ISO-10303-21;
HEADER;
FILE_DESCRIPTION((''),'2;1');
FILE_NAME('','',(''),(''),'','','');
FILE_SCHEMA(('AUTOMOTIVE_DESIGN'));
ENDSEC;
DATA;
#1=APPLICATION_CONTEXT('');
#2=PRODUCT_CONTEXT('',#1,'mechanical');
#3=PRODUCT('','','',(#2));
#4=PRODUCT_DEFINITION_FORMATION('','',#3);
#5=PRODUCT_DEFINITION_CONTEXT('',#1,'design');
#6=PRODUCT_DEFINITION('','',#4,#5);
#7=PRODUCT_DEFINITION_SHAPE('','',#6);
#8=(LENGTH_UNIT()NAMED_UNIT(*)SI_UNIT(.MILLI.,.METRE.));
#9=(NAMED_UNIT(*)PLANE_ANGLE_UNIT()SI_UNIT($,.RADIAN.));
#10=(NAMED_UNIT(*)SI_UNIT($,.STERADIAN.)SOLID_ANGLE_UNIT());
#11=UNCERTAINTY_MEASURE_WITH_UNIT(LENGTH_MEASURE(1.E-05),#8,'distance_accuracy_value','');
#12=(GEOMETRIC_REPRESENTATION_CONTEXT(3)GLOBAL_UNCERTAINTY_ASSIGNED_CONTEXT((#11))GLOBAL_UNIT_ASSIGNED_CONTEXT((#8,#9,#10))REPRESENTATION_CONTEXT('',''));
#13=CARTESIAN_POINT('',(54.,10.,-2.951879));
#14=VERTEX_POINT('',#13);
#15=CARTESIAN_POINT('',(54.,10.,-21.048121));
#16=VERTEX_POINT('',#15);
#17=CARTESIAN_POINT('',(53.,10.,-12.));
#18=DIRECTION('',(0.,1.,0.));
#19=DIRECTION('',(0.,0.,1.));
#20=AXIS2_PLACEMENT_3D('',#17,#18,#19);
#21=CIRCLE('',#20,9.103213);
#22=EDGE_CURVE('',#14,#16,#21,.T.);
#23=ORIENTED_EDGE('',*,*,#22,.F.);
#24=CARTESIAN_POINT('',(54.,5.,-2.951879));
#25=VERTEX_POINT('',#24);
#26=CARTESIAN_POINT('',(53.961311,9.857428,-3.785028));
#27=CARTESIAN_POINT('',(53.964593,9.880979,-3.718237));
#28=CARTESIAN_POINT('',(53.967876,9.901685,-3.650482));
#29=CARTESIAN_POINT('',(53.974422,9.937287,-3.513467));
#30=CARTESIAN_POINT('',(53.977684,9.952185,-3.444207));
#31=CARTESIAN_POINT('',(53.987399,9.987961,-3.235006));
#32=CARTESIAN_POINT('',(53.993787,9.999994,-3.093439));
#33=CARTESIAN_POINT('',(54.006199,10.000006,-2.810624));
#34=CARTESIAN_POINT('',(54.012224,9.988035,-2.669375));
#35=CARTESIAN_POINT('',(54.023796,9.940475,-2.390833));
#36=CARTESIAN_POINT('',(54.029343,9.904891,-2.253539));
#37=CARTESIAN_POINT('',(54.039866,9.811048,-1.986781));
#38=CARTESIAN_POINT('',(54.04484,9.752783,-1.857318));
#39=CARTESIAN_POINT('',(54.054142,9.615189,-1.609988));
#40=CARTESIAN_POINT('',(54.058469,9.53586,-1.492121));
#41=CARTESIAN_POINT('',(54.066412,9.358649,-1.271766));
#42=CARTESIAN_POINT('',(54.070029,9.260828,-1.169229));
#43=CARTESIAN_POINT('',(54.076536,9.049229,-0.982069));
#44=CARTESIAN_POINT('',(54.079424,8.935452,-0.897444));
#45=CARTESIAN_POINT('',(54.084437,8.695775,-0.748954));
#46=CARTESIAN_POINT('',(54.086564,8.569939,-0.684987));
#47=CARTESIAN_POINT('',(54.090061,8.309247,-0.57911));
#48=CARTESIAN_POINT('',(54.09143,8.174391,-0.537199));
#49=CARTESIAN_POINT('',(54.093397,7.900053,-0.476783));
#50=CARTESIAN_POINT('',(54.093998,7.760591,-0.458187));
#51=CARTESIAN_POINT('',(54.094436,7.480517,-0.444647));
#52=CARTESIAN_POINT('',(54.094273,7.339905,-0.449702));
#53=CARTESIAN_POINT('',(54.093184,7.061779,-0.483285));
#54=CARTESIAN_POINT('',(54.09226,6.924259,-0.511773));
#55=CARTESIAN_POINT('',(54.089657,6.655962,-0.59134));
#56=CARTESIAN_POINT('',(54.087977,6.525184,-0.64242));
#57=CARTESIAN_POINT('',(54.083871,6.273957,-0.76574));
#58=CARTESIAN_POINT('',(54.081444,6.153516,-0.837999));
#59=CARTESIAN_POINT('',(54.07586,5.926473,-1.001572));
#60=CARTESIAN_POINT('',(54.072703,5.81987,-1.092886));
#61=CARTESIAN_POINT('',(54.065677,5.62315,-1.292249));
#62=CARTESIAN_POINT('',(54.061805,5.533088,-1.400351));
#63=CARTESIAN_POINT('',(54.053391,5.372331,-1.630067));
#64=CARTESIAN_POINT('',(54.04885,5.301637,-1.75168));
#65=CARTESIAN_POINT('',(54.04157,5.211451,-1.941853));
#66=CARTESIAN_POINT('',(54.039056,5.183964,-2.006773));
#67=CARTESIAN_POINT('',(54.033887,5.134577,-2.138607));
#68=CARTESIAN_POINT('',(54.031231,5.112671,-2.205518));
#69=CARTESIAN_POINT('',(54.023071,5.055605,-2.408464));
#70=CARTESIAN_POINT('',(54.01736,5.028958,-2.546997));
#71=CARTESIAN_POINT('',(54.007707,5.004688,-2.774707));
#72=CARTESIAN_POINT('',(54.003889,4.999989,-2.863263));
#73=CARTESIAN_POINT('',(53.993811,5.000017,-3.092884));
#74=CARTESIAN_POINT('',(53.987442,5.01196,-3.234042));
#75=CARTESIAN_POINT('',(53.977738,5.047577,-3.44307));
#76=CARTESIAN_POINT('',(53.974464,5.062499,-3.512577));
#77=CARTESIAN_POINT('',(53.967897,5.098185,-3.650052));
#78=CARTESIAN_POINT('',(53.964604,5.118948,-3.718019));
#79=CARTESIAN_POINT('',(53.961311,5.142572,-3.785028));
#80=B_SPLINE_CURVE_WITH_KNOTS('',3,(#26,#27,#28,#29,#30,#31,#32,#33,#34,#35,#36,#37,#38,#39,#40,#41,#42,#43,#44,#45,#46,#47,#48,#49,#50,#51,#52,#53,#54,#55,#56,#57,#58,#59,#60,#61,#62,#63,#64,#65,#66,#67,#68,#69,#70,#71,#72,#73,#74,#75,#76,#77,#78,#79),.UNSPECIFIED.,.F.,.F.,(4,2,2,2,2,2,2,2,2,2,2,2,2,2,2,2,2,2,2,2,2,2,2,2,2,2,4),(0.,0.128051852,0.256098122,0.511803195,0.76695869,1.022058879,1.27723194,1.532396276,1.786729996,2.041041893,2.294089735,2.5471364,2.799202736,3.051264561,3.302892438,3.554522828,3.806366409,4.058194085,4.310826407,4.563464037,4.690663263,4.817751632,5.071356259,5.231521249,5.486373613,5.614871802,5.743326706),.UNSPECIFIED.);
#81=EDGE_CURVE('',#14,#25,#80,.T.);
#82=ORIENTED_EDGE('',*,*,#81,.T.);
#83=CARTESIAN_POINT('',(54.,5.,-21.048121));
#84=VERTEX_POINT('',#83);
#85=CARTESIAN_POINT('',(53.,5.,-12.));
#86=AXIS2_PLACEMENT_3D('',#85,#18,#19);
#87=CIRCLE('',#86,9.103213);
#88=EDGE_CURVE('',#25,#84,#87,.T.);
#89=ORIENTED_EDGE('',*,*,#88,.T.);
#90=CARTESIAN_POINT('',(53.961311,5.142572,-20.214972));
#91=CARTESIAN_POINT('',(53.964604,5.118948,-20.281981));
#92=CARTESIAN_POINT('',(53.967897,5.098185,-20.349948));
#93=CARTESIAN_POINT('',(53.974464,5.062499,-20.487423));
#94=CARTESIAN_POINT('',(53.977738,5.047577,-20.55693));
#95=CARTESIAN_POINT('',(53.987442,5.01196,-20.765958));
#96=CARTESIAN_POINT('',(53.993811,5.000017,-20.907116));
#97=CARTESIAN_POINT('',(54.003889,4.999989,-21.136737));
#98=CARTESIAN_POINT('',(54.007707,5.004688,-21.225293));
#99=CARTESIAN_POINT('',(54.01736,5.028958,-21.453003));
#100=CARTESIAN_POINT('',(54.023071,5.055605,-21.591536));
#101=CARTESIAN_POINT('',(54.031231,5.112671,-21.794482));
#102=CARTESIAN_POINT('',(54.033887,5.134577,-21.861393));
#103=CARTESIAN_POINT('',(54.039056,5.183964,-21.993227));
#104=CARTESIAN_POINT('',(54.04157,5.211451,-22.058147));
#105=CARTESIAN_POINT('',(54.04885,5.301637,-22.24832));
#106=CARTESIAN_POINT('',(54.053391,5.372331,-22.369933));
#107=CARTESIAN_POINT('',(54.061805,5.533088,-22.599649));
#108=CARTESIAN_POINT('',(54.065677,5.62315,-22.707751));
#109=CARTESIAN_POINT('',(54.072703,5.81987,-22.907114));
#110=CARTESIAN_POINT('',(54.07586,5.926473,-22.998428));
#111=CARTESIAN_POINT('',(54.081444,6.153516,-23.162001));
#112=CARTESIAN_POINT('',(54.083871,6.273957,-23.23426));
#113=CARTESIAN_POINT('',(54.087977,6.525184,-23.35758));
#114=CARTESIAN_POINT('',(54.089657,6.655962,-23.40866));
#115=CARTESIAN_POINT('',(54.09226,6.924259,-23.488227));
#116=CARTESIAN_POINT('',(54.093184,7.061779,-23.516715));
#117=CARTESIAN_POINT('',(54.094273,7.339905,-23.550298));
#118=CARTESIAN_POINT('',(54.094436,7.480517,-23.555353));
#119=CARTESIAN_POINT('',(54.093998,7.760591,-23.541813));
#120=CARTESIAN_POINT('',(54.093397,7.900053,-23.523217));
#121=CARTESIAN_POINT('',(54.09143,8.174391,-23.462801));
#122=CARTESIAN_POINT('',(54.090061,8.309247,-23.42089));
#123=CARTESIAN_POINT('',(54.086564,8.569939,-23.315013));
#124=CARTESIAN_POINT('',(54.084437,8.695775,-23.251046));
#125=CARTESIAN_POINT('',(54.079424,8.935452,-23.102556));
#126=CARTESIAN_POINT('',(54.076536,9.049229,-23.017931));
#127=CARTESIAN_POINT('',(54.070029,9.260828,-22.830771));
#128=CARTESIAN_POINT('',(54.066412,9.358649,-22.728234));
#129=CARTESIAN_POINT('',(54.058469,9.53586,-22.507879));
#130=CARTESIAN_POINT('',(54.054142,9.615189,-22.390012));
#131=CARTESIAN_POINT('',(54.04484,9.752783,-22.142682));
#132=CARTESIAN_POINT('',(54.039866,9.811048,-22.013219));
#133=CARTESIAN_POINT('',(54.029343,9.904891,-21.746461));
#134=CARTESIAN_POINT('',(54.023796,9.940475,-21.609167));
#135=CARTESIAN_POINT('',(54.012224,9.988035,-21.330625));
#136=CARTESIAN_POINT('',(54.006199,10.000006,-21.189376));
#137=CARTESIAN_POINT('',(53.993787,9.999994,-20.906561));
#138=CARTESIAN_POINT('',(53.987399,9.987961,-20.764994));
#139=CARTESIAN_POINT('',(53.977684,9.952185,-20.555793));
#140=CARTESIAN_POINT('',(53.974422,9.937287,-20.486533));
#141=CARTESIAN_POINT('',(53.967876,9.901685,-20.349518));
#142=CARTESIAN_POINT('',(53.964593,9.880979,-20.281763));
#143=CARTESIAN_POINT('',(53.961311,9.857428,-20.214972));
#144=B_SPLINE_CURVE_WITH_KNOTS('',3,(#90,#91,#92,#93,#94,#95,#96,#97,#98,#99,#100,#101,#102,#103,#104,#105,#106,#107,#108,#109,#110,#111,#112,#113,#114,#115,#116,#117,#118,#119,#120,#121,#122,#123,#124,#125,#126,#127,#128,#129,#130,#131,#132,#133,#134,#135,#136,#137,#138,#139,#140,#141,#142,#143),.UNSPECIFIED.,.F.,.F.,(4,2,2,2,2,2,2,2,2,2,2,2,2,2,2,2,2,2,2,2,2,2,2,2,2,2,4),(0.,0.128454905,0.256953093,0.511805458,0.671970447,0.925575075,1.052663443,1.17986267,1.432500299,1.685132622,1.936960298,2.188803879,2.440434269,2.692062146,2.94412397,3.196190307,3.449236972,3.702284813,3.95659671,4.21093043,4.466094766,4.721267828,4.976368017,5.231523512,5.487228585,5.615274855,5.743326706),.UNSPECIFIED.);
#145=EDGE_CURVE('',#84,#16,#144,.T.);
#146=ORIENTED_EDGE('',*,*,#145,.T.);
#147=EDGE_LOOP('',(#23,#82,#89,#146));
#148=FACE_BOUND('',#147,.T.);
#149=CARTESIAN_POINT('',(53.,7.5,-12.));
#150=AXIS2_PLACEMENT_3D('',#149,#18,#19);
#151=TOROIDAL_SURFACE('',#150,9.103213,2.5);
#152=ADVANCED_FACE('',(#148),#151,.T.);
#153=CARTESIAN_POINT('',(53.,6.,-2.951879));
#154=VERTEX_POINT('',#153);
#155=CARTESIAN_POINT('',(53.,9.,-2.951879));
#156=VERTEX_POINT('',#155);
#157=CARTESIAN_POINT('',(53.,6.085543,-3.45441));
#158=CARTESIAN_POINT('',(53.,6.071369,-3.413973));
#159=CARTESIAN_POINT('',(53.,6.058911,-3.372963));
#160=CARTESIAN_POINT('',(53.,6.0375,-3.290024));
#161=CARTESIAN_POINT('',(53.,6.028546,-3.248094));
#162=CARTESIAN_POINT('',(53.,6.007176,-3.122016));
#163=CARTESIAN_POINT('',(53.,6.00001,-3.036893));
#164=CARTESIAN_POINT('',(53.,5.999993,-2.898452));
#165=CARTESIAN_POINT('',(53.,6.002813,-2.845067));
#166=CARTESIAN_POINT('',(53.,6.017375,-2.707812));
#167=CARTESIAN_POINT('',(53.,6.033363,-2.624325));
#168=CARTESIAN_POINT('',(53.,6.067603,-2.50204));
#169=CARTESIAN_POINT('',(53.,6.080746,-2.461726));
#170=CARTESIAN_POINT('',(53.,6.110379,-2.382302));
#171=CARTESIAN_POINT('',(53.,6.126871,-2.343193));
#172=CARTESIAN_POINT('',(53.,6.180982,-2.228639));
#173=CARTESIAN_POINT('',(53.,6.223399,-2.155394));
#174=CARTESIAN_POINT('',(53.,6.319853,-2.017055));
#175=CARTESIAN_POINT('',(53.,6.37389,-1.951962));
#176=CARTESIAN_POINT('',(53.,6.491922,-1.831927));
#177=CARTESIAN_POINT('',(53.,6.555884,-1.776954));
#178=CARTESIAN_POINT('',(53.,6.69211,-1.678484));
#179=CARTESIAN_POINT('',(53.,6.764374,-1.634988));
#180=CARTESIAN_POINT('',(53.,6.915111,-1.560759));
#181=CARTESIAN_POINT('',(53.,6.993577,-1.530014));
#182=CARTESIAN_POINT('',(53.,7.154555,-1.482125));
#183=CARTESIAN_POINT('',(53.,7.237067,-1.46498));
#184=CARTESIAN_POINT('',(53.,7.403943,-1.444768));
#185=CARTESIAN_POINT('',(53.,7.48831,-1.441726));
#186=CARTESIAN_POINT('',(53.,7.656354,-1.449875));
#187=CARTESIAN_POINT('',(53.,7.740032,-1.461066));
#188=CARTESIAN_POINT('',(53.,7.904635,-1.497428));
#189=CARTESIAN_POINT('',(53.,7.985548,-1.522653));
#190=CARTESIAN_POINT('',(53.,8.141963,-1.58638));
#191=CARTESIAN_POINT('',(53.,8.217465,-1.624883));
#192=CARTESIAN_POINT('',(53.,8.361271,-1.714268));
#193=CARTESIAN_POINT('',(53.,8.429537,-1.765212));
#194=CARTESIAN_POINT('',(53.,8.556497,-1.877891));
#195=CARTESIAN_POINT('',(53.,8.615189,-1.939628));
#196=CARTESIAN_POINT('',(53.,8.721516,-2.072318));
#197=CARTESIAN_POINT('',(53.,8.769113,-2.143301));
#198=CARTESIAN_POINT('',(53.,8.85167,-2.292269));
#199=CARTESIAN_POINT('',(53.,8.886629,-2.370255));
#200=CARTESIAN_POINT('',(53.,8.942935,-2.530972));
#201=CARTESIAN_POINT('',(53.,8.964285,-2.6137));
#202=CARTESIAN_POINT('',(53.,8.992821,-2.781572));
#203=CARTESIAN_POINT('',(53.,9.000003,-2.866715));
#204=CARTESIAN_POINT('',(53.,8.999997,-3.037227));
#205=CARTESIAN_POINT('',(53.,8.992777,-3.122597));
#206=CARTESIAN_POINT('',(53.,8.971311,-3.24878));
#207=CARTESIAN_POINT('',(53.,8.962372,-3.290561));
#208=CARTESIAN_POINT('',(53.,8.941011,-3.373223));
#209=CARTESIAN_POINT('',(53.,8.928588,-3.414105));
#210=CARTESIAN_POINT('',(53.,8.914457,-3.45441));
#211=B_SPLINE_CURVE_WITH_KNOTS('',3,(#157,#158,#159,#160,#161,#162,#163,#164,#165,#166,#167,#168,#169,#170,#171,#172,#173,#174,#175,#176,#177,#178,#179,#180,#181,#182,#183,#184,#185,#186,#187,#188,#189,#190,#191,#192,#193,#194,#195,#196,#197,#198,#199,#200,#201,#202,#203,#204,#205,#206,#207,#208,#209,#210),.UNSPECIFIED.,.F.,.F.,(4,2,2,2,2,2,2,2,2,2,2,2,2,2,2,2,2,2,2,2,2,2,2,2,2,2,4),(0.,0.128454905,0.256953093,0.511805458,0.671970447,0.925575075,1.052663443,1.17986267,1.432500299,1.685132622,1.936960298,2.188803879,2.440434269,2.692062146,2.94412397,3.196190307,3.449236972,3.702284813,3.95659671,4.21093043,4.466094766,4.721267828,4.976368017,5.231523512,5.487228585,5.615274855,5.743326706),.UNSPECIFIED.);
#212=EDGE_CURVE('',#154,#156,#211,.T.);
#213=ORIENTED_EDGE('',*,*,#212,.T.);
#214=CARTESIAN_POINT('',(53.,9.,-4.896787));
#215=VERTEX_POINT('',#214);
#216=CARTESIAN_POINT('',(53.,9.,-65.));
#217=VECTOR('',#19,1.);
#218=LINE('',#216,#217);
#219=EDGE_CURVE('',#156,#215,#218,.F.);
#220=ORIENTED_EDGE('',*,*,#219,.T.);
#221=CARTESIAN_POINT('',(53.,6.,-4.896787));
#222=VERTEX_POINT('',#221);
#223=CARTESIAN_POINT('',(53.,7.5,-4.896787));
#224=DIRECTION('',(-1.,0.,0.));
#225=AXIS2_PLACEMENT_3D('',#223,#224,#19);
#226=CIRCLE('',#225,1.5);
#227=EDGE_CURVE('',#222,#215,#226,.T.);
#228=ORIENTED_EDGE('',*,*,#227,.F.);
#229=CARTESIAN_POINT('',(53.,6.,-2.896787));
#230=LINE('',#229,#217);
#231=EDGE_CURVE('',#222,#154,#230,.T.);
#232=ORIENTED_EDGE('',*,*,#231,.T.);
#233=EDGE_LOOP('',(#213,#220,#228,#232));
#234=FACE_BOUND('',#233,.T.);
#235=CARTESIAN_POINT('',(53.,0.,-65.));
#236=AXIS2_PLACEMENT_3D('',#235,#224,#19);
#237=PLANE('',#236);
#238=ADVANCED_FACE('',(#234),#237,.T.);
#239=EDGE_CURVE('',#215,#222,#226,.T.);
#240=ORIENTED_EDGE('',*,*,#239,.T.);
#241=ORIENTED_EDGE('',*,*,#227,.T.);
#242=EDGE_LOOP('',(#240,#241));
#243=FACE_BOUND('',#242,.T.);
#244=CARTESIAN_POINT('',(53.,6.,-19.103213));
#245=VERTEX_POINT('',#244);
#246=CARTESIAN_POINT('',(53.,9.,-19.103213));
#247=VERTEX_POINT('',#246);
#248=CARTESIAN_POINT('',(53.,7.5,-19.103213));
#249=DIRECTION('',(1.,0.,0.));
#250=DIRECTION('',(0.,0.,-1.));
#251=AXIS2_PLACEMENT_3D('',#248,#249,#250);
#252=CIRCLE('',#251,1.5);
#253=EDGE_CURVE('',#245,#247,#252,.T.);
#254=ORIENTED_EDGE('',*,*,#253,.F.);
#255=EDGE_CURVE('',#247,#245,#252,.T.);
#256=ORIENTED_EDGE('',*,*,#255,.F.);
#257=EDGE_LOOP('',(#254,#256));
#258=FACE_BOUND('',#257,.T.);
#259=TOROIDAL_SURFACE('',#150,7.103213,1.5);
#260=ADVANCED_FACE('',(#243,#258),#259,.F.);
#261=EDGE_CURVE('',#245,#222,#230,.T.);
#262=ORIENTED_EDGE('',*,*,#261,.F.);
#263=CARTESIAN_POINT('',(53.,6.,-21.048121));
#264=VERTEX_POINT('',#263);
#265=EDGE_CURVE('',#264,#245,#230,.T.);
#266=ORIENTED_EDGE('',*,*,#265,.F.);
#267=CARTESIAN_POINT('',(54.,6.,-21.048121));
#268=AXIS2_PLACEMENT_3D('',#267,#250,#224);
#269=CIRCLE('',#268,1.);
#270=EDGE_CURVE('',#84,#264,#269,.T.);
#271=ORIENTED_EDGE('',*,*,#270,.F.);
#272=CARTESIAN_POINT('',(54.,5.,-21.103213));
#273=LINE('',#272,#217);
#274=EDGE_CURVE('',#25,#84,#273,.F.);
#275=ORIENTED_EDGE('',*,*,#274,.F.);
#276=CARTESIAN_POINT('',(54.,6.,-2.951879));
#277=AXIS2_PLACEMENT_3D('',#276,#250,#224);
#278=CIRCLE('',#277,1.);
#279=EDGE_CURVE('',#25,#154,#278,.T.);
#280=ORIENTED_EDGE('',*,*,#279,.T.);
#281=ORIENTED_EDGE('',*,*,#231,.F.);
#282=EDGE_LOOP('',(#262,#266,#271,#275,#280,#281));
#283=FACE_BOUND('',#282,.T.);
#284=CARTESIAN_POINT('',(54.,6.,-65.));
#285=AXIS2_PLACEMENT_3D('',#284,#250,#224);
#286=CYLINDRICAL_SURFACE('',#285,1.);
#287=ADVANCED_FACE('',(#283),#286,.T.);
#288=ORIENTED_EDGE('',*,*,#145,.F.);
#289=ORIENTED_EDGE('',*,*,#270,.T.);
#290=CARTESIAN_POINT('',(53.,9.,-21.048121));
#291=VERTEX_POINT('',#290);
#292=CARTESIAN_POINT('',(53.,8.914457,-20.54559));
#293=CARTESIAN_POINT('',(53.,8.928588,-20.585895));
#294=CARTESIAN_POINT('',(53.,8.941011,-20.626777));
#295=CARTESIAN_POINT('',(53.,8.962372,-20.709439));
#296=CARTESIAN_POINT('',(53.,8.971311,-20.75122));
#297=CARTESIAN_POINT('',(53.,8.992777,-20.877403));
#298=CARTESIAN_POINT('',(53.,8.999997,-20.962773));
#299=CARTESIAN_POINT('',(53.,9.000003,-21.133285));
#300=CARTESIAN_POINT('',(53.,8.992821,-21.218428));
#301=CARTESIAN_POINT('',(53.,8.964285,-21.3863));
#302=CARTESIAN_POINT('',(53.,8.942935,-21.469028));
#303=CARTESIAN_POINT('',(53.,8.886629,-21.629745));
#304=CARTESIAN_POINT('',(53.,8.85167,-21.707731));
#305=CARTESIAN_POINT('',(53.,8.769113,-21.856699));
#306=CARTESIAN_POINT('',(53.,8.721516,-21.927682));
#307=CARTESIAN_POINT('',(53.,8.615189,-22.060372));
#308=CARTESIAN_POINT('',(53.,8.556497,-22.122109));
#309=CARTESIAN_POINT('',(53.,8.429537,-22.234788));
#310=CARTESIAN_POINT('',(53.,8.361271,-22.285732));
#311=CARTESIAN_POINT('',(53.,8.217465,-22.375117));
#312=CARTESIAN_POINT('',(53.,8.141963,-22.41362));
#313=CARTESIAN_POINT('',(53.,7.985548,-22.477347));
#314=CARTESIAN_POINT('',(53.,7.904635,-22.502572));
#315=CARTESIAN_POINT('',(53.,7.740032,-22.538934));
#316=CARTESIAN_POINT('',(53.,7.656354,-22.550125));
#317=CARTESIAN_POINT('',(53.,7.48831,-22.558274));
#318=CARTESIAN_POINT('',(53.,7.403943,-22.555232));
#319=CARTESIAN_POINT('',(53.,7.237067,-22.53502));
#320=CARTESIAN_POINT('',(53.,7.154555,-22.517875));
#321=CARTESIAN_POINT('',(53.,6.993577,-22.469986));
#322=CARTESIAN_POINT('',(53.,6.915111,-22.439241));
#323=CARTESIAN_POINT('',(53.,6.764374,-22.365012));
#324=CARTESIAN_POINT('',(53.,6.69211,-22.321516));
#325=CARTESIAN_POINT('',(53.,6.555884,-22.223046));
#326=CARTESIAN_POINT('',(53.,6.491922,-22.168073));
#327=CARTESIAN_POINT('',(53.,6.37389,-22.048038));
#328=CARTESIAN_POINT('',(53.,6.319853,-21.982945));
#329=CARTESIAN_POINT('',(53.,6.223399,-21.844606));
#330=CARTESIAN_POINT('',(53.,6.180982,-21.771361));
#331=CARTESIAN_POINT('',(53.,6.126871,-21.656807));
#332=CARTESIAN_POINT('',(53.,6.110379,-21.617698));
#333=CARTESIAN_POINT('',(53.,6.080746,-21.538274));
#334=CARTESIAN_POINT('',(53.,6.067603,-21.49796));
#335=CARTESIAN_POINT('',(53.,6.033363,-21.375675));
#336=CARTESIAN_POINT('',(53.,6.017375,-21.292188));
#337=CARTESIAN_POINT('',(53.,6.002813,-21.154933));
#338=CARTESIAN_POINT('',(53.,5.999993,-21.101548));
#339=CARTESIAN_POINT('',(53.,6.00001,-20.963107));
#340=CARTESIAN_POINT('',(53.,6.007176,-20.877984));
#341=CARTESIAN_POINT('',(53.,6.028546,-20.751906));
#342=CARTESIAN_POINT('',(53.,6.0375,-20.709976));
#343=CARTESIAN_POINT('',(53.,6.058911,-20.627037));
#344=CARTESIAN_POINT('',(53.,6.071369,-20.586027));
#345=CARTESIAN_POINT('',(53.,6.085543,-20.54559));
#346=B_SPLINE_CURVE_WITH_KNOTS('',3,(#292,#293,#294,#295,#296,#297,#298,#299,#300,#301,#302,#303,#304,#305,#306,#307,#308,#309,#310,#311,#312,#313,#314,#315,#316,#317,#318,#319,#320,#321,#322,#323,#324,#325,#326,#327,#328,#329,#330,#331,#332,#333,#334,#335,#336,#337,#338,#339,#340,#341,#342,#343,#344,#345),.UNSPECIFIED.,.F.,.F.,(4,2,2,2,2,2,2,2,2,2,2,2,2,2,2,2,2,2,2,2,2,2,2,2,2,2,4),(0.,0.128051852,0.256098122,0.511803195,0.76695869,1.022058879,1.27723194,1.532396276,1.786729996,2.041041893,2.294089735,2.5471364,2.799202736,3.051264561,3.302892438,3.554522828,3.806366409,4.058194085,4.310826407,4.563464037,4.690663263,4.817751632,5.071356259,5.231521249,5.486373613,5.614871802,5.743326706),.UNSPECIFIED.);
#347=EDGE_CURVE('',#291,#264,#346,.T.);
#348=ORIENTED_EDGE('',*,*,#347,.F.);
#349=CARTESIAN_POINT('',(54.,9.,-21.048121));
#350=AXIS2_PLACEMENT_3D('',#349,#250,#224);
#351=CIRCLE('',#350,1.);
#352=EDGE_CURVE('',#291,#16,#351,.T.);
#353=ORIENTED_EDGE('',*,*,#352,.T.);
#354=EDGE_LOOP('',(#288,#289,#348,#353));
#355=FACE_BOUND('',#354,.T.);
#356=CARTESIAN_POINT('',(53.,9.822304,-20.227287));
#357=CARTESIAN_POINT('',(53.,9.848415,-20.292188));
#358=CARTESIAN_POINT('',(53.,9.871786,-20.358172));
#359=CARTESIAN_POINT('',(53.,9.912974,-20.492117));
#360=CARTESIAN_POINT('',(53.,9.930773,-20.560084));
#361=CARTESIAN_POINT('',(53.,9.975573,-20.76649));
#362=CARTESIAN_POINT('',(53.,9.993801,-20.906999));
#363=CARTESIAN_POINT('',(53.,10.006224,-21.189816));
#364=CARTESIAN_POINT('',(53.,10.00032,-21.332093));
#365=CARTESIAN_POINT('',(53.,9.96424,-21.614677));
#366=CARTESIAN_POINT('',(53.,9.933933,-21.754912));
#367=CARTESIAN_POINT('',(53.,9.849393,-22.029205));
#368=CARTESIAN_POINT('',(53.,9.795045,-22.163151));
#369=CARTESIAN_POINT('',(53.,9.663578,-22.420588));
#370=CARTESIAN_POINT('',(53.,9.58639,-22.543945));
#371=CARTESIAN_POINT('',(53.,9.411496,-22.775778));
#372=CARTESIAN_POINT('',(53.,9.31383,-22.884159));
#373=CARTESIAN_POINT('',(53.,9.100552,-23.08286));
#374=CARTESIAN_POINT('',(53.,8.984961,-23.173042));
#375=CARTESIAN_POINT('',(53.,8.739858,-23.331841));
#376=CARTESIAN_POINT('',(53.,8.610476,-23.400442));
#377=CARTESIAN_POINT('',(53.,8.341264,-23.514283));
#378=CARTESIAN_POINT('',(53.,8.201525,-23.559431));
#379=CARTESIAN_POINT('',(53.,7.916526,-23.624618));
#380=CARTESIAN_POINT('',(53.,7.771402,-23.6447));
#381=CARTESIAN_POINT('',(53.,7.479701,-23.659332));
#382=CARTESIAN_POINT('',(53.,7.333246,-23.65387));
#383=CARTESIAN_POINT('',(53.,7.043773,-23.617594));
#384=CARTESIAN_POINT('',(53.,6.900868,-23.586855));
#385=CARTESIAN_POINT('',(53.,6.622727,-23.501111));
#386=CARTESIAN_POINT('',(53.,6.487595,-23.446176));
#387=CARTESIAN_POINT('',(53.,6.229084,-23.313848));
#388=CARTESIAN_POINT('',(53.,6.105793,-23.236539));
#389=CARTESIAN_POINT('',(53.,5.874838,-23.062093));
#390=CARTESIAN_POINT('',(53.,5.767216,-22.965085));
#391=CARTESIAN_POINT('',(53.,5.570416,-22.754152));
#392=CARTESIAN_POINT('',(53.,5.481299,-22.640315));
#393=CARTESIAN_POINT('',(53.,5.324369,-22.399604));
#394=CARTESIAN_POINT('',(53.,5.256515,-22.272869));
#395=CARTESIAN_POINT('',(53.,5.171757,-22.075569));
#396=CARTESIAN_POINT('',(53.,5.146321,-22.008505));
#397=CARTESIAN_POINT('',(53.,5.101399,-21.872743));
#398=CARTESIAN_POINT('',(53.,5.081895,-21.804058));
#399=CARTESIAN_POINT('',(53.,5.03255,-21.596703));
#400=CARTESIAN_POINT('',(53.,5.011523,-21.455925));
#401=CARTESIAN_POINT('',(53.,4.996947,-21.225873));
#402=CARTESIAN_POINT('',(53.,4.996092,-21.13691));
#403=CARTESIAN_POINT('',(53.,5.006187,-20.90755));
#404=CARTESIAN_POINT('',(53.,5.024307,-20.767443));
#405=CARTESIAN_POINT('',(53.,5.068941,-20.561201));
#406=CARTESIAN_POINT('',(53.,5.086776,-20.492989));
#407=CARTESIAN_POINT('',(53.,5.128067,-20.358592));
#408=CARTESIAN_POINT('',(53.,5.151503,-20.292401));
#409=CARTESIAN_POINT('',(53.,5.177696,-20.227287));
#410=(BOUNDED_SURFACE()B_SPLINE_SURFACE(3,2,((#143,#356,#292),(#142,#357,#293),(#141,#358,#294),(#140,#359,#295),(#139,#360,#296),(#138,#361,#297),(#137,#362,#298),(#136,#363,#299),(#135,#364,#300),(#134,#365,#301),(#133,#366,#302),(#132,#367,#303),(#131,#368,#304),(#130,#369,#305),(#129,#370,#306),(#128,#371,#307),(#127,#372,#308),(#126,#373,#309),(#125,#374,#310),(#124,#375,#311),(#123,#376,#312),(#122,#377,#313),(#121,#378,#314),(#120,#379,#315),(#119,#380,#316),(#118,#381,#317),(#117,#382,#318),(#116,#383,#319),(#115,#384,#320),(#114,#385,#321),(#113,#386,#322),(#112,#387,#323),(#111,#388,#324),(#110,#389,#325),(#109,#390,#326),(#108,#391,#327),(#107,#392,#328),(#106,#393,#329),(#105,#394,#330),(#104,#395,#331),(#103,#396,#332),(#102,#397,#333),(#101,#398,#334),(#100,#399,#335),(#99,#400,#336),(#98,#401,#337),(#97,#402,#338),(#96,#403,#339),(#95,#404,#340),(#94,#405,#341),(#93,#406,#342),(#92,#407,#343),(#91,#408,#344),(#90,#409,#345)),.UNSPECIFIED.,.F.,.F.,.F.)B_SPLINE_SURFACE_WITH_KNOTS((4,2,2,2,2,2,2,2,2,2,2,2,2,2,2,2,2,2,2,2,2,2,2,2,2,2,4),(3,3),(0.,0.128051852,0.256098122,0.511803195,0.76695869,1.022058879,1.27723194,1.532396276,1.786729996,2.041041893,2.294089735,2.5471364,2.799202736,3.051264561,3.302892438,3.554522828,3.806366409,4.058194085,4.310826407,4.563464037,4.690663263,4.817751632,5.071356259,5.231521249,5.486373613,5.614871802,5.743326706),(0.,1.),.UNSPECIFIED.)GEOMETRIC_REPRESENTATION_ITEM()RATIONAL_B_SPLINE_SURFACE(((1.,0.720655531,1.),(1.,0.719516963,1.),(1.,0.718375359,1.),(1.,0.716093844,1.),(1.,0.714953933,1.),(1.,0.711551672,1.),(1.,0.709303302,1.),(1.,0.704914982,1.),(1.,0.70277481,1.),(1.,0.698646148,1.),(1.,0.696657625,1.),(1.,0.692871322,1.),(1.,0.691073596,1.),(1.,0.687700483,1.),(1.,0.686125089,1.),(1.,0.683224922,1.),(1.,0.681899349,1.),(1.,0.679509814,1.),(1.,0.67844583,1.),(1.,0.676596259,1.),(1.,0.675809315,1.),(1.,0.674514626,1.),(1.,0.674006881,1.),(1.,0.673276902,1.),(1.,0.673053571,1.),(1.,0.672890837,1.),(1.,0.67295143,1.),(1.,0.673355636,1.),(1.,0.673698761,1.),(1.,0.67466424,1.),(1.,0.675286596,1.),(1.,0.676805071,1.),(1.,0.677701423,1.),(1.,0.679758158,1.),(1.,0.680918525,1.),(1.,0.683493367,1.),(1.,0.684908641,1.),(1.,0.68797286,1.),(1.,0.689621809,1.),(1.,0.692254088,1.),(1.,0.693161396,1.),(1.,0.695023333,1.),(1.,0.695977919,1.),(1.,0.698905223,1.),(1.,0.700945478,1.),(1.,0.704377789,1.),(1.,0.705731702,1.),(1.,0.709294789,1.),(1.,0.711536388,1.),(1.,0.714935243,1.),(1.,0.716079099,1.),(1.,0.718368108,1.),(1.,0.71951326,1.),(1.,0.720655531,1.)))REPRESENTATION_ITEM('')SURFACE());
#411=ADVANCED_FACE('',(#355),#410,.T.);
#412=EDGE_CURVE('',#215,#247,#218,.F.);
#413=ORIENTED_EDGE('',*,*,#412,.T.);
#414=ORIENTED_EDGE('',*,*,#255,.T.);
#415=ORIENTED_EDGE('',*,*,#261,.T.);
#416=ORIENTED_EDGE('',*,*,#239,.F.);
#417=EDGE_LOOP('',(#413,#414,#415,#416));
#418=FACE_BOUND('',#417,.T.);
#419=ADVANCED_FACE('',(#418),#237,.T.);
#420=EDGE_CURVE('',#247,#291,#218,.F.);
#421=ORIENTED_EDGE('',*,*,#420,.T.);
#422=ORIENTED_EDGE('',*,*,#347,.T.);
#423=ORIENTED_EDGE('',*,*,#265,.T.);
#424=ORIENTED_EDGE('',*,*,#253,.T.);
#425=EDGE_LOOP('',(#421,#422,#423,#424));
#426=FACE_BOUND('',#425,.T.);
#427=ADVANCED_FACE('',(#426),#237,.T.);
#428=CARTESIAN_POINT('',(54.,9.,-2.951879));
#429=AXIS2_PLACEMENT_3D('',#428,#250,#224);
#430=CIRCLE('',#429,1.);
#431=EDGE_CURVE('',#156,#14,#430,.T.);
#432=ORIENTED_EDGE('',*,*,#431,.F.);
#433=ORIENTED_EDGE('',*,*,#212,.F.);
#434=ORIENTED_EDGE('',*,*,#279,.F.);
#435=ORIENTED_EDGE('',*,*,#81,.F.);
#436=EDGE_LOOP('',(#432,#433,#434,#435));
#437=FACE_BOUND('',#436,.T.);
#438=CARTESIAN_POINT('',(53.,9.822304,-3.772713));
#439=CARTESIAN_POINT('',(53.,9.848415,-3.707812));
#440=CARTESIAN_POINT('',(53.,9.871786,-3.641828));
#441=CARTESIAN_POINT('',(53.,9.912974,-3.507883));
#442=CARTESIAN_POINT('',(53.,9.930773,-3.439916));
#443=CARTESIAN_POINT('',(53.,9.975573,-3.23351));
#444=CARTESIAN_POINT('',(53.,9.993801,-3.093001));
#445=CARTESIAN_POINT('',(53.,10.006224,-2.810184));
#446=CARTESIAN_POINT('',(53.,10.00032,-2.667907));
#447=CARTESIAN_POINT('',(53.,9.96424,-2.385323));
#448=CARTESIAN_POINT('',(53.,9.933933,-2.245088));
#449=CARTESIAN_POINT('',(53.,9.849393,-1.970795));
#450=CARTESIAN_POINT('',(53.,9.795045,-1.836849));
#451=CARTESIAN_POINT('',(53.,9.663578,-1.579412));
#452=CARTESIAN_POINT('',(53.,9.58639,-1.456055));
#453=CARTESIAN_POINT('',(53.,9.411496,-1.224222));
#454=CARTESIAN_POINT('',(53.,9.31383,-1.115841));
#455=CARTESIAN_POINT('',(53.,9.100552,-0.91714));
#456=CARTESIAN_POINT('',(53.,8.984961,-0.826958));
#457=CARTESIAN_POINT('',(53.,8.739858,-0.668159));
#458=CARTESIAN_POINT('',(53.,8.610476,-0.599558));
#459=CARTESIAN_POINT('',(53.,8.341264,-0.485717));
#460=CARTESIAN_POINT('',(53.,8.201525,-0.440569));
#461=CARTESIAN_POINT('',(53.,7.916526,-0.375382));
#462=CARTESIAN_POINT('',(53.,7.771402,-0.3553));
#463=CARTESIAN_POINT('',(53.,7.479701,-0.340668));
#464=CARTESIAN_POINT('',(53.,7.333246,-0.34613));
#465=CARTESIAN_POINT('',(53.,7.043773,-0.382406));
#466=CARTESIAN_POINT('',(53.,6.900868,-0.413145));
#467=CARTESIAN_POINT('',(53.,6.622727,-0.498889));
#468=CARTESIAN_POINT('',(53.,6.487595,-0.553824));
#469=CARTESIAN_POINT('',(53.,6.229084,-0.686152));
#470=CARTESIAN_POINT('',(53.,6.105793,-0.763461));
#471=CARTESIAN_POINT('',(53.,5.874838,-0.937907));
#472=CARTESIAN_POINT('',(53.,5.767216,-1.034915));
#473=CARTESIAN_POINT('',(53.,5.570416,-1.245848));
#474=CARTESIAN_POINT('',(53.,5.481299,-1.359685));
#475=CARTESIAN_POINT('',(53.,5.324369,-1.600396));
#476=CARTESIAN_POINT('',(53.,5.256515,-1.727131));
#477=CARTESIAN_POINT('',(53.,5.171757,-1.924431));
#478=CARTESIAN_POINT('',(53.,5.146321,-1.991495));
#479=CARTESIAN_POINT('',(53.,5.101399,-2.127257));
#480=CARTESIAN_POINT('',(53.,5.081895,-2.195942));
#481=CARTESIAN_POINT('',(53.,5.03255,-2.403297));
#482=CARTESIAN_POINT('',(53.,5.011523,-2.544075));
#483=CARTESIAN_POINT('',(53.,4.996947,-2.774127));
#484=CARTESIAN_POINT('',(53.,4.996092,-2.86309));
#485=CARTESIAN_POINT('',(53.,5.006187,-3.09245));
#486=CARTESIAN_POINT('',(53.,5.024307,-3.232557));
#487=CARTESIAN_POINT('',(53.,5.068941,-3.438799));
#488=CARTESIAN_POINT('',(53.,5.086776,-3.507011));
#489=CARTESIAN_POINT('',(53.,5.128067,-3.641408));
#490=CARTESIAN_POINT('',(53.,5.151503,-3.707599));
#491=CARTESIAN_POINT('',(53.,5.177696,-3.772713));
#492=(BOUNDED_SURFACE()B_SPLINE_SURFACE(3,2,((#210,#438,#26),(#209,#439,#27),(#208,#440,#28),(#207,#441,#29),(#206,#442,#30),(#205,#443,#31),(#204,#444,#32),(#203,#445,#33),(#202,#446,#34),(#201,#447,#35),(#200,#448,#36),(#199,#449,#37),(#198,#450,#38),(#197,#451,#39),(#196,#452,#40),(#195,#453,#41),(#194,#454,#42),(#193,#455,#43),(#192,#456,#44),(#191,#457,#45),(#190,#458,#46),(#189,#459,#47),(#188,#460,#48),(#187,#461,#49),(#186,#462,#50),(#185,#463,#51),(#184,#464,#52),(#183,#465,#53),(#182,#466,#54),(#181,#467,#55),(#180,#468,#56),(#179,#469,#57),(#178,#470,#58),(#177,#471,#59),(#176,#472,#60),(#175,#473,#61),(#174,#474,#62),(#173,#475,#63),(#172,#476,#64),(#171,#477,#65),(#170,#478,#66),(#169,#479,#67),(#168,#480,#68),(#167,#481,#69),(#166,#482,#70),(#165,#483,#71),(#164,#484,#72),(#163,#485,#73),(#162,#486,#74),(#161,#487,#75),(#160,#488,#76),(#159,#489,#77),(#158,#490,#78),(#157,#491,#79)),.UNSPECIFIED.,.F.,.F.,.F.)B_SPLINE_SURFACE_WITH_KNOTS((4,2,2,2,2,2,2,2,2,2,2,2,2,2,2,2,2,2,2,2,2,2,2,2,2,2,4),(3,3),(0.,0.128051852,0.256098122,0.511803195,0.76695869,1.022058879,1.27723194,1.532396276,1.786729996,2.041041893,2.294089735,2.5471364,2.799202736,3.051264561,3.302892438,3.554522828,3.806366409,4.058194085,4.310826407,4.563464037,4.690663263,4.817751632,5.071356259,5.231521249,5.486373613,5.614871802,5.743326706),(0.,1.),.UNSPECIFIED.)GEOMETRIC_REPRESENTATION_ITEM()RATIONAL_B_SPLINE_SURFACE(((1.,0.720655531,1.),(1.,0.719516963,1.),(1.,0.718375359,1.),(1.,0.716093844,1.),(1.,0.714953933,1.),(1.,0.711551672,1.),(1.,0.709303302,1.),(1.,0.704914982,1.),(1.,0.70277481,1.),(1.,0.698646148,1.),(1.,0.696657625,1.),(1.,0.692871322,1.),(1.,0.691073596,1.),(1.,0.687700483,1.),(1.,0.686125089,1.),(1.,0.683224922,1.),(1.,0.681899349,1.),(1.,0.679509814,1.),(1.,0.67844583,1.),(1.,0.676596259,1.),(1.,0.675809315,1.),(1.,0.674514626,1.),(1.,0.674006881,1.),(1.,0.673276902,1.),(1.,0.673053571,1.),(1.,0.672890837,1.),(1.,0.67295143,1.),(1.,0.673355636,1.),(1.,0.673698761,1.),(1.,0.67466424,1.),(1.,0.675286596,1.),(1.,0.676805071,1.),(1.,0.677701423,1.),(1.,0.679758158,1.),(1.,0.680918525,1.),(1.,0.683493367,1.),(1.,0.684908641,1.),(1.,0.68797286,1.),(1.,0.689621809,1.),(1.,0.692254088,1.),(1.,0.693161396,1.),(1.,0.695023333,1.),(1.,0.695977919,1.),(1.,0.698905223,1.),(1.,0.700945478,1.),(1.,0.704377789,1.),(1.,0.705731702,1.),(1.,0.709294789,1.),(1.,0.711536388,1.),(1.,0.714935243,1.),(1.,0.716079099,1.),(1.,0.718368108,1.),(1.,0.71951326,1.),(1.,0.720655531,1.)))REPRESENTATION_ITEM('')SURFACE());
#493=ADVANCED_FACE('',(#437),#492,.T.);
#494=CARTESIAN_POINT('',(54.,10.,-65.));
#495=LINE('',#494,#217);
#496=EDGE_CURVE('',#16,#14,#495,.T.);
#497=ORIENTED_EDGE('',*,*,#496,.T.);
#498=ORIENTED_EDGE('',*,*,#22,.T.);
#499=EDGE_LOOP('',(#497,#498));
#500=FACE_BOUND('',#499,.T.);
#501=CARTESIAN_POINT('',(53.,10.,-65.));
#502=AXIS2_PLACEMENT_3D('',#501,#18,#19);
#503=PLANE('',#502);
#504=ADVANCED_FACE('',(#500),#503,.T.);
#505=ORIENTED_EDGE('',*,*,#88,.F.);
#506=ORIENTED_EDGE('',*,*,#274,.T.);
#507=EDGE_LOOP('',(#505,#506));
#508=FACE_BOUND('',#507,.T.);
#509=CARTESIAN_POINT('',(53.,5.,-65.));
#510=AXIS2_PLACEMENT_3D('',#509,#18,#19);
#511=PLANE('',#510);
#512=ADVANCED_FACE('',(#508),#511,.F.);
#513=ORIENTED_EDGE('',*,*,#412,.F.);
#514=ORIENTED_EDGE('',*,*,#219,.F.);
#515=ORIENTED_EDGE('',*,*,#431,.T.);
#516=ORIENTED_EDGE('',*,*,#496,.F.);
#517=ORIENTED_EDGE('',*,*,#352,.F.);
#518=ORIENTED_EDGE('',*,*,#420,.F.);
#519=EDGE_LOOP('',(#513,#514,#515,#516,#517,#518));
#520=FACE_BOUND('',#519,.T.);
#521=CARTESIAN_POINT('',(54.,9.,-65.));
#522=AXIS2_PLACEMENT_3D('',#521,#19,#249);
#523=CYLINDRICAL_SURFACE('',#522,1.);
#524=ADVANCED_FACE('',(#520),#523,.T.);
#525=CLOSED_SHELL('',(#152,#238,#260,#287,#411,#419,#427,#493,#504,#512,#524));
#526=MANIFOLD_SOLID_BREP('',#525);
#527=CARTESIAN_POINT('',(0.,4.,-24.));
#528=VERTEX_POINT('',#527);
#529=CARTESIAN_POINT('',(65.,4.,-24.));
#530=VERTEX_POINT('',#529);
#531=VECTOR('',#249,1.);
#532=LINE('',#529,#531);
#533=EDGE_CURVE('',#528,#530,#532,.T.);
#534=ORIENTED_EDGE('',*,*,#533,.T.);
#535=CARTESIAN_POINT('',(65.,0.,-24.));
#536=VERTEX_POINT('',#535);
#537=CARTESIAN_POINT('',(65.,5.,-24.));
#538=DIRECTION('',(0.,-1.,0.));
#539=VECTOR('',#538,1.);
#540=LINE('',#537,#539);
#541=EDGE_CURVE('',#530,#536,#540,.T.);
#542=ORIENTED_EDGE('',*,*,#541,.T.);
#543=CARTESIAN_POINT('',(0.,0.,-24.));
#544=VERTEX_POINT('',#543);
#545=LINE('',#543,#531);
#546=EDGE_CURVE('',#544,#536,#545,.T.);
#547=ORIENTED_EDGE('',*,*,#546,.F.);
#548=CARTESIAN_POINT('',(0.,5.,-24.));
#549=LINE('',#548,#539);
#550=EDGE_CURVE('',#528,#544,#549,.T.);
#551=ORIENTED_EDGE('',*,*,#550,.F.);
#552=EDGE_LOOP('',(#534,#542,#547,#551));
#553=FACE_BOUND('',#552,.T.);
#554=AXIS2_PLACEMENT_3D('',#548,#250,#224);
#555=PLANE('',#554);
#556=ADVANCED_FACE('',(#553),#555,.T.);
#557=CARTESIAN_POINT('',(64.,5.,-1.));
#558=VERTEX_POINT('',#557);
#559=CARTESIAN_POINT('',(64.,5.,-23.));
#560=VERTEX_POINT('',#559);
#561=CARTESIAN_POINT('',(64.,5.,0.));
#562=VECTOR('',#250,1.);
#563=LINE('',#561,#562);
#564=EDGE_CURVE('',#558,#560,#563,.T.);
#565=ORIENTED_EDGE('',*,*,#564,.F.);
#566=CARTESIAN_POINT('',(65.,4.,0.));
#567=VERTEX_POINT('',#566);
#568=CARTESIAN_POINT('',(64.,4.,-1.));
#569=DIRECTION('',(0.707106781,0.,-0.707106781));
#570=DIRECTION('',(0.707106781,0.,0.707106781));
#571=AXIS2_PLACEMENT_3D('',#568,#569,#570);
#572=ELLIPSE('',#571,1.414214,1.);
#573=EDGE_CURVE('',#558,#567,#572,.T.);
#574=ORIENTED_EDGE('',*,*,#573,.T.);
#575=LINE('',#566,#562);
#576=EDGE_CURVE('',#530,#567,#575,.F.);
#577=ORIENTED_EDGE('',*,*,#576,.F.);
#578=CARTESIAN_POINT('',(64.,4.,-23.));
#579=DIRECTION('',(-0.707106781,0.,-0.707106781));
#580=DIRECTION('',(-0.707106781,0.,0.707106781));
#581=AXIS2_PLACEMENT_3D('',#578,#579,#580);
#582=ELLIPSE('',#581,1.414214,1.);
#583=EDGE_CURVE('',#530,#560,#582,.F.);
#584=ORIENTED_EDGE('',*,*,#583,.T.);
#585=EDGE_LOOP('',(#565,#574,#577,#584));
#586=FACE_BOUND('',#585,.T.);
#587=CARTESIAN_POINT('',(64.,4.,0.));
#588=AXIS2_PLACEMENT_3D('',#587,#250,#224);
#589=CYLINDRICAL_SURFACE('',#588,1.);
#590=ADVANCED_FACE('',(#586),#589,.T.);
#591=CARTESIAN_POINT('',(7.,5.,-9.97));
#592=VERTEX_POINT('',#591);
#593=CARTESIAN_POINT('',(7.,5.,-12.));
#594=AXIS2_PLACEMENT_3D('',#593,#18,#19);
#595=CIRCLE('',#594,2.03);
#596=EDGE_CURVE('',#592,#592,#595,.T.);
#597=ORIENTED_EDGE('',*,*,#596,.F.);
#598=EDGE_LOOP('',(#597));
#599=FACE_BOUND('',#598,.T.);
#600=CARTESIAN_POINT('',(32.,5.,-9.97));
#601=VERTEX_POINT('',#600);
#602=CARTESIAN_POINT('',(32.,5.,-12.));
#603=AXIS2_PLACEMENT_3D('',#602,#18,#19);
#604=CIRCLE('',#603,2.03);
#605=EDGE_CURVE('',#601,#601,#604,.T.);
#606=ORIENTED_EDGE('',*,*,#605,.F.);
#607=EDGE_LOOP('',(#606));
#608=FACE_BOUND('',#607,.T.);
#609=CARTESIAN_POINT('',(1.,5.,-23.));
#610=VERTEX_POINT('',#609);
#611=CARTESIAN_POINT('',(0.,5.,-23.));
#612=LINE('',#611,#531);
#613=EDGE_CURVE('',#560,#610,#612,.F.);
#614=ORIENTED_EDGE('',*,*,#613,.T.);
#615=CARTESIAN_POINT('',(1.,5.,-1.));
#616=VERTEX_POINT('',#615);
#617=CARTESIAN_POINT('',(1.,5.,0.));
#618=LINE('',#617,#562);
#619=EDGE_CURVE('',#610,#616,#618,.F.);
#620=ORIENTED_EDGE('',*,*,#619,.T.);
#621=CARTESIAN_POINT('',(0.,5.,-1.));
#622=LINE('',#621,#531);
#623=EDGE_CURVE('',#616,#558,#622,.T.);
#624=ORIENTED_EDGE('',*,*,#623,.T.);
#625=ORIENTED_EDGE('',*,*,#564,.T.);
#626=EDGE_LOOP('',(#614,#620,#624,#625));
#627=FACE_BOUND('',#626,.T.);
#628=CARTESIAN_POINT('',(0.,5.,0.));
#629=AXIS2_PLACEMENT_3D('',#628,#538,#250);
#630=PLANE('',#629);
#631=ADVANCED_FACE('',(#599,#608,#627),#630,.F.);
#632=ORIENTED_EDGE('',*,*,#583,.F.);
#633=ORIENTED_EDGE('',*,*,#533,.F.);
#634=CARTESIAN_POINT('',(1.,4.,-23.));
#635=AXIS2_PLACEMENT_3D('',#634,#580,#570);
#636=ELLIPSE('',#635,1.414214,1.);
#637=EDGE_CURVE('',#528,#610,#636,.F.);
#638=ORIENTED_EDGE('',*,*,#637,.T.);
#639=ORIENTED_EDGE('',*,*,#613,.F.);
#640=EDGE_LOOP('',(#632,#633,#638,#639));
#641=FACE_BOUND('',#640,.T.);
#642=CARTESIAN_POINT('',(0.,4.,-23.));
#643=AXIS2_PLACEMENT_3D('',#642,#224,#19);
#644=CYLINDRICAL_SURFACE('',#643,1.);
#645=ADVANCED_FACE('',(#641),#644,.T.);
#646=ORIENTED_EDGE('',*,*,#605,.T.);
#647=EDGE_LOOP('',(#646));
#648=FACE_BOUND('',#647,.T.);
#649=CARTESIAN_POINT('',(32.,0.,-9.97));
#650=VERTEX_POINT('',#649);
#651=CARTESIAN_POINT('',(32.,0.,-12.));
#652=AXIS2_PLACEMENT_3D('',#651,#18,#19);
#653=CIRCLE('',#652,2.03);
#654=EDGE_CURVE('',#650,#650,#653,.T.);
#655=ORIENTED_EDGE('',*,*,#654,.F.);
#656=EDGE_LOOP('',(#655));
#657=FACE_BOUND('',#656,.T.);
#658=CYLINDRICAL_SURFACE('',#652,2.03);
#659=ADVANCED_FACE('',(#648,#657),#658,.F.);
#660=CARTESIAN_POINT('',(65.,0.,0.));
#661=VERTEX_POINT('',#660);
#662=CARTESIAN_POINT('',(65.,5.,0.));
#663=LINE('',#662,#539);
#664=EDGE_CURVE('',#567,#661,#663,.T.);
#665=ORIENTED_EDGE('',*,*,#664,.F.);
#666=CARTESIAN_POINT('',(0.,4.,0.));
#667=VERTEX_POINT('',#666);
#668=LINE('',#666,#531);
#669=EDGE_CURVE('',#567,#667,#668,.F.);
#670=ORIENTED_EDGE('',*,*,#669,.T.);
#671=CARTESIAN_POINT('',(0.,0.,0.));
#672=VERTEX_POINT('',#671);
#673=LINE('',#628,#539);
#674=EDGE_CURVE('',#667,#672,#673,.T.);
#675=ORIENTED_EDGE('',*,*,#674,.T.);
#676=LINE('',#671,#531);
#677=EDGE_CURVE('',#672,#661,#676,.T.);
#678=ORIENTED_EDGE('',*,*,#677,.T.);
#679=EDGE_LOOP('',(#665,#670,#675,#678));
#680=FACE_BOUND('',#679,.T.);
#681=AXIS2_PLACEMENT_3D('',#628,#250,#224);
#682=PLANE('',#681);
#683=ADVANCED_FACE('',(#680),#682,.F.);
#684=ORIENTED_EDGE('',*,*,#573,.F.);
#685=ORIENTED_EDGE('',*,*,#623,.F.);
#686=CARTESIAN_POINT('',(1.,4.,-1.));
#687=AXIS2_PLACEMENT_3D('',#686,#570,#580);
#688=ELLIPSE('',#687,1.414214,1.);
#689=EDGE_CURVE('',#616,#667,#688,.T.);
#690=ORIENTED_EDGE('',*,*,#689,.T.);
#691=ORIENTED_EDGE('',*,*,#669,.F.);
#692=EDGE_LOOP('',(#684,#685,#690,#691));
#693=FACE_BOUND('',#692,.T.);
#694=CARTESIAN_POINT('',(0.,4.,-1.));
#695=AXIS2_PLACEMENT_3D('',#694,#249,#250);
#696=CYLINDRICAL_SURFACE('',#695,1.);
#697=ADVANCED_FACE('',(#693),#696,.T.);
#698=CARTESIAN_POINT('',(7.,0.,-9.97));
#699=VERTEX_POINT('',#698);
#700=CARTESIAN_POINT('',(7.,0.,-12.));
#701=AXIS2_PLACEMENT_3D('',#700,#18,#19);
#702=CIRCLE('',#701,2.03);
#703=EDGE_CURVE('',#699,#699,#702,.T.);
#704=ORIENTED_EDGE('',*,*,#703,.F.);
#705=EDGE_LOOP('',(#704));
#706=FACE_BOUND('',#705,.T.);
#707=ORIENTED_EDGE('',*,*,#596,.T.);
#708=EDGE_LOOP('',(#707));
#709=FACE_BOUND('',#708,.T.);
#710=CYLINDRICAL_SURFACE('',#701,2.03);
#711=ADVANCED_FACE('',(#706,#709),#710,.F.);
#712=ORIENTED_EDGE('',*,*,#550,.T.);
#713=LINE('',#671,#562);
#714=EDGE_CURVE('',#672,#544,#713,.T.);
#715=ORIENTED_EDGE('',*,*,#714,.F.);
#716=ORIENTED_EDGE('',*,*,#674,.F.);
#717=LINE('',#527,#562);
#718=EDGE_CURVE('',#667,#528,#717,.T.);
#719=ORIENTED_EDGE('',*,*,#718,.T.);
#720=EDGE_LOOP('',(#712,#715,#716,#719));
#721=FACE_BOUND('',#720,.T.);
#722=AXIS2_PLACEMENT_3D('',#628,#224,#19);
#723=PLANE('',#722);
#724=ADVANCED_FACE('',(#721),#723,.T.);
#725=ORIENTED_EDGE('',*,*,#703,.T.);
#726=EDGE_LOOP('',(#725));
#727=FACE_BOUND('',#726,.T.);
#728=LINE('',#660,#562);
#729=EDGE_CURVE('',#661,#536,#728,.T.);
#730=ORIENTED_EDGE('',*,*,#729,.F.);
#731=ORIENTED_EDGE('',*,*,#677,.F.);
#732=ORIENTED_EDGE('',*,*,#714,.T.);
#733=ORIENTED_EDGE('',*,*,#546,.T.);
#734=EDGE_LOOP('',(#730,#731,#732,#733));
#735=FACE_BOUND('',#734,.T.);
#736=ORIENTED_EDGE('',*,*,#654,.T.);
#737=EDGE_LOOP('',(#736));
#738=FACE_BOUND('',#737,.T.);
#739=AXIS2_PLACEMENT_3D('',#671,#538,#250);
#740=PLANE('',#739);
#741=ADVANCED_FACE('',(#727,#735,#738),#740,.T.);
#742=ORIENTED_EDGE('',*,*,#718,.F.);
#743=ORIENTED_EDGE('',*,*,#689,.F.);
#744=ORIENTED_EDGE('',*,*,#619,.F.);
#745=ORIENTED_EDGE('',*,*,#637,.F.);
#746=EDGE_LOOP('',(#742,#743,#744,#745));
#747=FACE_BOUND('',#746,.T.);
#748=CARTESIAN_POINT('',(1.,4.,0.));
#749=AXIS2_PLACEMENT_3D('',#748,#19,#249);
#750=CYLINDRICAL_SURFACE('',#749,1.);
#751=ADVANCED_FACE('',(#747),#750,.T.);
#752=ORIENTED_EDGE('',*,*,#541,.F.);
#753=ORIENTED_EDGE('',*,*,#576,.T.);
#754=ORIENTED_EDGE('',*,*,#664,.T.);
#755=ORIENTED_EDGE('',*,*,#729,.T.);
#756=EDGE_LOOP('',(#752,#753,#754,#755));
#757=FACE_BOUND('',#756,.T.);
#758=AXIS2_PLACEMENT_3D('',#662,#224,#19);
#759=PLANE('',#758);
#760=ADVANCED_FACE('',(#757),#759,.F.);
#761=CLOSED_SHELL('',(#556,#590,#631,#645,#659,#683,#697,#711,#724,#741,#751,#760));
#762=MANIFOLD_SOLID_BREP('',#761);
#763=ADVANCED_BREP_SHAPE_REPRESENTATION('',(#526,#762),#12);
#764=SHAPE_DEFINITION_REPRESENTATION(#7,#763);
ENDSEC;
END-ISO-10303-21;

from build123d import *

# Parameters (mm, degrees)
SKETCH1_W           = 65
SKETCH1_H           = 24
BOSS_EXTRUDE1_DEPTH = 5
REVOLVE1_OUTLINE_R  = 1.5
REVOLVE1_ANGLE      = 180
SKETCH4_R           = 2.03
CUT_EXTRUDE1_DEPTH  = 5
FILLET1_R           = 1
FILLET2_R           = 1


# Read off the part's stored shape, not the designer's step: Revolve1
with BuildPart() as part:
    # Sketch1 → Boss-Extrude1 (new body)
    with BuildSketch(Plane(origin=(0, 0, 0), x_dir=(1, 0, 0), z_dir=(0, 1, 0))):
        with Locations((32.5, 12)):
            Rectangle(SKETCH1_W, SKETCH1_H)
    extrude(amount=BOSS_EXTRUDE1_DEPTH)

    # Sketch4 → Cut-Extrude1 (cut)
    with BuildSketch(Plane(origin=(0, 5, 0), x_dir=(1, 0, 0), z_dir=(0, 1, 0))):
        with Locations(Location((32, 12, 0), (0, 0, 270))):
            Circle(SKETCH4_R)
        with Locations(Location((7, 12, 0), (0, 0, 270))):
            Circle(SKETCH4_R)
    extrude(amount=-CUT_EXTRUDE1_DEPTH, mode=Mode.SUBTRACT)

    # Fillet2
    fillet2_edges = [part.edges().sort_by_distance(p)[0] for p in [
        (65, 5, -12),
        (32.5, 5, 0),
        (0, 5, -12),
        (32.5, 5, -24),
    ]]
    fillet(fillet2_edges, radius=FILLET2_R)


with BuildPart() as body_2:
    # Revolve1 outline → Revolve1 (revolve)
    with BuildSketch(Plane(origin=(53, 0, -12), x_dir=(0, 0, 1), z_dir=(-1, 0, 0))):
        with BuildLine():
            Line((0, 5), (9.10321303, 5))
            ThreePointArc((9.10321303, 5), (11.60321303, 7.5), (9.10321303, 10))
            Line((9.10321303, 10), (0, 10))
            Line((0, 10), (0, 5))
        make_face()
        with Locations((7.10321303, 7.5)):
            Circle(REVOLVE1_OUTLINE_R, mode=Mode.SUBTRACT)
    revolve(axis=Axis((53, 0, -12), (0, 1, 0)), revolution_arc=REVOLVE1_ANGLE)

    # Fillet1
    fillet1_edges = [body_2.edges().sort_by_distance(p)[0] for p in [
        (53, 10, -12),
        (53, 5, -12),
        (53, 7.5, -23.60321303),
        (53, 7.5, -0.39678697),
    ]]
    fillet(fillet1_edges, radius=FILLET1_R - 0.0001)  # a hair under: the kernel refuses the full size


solid = Compound([part.part, body_2.part])
